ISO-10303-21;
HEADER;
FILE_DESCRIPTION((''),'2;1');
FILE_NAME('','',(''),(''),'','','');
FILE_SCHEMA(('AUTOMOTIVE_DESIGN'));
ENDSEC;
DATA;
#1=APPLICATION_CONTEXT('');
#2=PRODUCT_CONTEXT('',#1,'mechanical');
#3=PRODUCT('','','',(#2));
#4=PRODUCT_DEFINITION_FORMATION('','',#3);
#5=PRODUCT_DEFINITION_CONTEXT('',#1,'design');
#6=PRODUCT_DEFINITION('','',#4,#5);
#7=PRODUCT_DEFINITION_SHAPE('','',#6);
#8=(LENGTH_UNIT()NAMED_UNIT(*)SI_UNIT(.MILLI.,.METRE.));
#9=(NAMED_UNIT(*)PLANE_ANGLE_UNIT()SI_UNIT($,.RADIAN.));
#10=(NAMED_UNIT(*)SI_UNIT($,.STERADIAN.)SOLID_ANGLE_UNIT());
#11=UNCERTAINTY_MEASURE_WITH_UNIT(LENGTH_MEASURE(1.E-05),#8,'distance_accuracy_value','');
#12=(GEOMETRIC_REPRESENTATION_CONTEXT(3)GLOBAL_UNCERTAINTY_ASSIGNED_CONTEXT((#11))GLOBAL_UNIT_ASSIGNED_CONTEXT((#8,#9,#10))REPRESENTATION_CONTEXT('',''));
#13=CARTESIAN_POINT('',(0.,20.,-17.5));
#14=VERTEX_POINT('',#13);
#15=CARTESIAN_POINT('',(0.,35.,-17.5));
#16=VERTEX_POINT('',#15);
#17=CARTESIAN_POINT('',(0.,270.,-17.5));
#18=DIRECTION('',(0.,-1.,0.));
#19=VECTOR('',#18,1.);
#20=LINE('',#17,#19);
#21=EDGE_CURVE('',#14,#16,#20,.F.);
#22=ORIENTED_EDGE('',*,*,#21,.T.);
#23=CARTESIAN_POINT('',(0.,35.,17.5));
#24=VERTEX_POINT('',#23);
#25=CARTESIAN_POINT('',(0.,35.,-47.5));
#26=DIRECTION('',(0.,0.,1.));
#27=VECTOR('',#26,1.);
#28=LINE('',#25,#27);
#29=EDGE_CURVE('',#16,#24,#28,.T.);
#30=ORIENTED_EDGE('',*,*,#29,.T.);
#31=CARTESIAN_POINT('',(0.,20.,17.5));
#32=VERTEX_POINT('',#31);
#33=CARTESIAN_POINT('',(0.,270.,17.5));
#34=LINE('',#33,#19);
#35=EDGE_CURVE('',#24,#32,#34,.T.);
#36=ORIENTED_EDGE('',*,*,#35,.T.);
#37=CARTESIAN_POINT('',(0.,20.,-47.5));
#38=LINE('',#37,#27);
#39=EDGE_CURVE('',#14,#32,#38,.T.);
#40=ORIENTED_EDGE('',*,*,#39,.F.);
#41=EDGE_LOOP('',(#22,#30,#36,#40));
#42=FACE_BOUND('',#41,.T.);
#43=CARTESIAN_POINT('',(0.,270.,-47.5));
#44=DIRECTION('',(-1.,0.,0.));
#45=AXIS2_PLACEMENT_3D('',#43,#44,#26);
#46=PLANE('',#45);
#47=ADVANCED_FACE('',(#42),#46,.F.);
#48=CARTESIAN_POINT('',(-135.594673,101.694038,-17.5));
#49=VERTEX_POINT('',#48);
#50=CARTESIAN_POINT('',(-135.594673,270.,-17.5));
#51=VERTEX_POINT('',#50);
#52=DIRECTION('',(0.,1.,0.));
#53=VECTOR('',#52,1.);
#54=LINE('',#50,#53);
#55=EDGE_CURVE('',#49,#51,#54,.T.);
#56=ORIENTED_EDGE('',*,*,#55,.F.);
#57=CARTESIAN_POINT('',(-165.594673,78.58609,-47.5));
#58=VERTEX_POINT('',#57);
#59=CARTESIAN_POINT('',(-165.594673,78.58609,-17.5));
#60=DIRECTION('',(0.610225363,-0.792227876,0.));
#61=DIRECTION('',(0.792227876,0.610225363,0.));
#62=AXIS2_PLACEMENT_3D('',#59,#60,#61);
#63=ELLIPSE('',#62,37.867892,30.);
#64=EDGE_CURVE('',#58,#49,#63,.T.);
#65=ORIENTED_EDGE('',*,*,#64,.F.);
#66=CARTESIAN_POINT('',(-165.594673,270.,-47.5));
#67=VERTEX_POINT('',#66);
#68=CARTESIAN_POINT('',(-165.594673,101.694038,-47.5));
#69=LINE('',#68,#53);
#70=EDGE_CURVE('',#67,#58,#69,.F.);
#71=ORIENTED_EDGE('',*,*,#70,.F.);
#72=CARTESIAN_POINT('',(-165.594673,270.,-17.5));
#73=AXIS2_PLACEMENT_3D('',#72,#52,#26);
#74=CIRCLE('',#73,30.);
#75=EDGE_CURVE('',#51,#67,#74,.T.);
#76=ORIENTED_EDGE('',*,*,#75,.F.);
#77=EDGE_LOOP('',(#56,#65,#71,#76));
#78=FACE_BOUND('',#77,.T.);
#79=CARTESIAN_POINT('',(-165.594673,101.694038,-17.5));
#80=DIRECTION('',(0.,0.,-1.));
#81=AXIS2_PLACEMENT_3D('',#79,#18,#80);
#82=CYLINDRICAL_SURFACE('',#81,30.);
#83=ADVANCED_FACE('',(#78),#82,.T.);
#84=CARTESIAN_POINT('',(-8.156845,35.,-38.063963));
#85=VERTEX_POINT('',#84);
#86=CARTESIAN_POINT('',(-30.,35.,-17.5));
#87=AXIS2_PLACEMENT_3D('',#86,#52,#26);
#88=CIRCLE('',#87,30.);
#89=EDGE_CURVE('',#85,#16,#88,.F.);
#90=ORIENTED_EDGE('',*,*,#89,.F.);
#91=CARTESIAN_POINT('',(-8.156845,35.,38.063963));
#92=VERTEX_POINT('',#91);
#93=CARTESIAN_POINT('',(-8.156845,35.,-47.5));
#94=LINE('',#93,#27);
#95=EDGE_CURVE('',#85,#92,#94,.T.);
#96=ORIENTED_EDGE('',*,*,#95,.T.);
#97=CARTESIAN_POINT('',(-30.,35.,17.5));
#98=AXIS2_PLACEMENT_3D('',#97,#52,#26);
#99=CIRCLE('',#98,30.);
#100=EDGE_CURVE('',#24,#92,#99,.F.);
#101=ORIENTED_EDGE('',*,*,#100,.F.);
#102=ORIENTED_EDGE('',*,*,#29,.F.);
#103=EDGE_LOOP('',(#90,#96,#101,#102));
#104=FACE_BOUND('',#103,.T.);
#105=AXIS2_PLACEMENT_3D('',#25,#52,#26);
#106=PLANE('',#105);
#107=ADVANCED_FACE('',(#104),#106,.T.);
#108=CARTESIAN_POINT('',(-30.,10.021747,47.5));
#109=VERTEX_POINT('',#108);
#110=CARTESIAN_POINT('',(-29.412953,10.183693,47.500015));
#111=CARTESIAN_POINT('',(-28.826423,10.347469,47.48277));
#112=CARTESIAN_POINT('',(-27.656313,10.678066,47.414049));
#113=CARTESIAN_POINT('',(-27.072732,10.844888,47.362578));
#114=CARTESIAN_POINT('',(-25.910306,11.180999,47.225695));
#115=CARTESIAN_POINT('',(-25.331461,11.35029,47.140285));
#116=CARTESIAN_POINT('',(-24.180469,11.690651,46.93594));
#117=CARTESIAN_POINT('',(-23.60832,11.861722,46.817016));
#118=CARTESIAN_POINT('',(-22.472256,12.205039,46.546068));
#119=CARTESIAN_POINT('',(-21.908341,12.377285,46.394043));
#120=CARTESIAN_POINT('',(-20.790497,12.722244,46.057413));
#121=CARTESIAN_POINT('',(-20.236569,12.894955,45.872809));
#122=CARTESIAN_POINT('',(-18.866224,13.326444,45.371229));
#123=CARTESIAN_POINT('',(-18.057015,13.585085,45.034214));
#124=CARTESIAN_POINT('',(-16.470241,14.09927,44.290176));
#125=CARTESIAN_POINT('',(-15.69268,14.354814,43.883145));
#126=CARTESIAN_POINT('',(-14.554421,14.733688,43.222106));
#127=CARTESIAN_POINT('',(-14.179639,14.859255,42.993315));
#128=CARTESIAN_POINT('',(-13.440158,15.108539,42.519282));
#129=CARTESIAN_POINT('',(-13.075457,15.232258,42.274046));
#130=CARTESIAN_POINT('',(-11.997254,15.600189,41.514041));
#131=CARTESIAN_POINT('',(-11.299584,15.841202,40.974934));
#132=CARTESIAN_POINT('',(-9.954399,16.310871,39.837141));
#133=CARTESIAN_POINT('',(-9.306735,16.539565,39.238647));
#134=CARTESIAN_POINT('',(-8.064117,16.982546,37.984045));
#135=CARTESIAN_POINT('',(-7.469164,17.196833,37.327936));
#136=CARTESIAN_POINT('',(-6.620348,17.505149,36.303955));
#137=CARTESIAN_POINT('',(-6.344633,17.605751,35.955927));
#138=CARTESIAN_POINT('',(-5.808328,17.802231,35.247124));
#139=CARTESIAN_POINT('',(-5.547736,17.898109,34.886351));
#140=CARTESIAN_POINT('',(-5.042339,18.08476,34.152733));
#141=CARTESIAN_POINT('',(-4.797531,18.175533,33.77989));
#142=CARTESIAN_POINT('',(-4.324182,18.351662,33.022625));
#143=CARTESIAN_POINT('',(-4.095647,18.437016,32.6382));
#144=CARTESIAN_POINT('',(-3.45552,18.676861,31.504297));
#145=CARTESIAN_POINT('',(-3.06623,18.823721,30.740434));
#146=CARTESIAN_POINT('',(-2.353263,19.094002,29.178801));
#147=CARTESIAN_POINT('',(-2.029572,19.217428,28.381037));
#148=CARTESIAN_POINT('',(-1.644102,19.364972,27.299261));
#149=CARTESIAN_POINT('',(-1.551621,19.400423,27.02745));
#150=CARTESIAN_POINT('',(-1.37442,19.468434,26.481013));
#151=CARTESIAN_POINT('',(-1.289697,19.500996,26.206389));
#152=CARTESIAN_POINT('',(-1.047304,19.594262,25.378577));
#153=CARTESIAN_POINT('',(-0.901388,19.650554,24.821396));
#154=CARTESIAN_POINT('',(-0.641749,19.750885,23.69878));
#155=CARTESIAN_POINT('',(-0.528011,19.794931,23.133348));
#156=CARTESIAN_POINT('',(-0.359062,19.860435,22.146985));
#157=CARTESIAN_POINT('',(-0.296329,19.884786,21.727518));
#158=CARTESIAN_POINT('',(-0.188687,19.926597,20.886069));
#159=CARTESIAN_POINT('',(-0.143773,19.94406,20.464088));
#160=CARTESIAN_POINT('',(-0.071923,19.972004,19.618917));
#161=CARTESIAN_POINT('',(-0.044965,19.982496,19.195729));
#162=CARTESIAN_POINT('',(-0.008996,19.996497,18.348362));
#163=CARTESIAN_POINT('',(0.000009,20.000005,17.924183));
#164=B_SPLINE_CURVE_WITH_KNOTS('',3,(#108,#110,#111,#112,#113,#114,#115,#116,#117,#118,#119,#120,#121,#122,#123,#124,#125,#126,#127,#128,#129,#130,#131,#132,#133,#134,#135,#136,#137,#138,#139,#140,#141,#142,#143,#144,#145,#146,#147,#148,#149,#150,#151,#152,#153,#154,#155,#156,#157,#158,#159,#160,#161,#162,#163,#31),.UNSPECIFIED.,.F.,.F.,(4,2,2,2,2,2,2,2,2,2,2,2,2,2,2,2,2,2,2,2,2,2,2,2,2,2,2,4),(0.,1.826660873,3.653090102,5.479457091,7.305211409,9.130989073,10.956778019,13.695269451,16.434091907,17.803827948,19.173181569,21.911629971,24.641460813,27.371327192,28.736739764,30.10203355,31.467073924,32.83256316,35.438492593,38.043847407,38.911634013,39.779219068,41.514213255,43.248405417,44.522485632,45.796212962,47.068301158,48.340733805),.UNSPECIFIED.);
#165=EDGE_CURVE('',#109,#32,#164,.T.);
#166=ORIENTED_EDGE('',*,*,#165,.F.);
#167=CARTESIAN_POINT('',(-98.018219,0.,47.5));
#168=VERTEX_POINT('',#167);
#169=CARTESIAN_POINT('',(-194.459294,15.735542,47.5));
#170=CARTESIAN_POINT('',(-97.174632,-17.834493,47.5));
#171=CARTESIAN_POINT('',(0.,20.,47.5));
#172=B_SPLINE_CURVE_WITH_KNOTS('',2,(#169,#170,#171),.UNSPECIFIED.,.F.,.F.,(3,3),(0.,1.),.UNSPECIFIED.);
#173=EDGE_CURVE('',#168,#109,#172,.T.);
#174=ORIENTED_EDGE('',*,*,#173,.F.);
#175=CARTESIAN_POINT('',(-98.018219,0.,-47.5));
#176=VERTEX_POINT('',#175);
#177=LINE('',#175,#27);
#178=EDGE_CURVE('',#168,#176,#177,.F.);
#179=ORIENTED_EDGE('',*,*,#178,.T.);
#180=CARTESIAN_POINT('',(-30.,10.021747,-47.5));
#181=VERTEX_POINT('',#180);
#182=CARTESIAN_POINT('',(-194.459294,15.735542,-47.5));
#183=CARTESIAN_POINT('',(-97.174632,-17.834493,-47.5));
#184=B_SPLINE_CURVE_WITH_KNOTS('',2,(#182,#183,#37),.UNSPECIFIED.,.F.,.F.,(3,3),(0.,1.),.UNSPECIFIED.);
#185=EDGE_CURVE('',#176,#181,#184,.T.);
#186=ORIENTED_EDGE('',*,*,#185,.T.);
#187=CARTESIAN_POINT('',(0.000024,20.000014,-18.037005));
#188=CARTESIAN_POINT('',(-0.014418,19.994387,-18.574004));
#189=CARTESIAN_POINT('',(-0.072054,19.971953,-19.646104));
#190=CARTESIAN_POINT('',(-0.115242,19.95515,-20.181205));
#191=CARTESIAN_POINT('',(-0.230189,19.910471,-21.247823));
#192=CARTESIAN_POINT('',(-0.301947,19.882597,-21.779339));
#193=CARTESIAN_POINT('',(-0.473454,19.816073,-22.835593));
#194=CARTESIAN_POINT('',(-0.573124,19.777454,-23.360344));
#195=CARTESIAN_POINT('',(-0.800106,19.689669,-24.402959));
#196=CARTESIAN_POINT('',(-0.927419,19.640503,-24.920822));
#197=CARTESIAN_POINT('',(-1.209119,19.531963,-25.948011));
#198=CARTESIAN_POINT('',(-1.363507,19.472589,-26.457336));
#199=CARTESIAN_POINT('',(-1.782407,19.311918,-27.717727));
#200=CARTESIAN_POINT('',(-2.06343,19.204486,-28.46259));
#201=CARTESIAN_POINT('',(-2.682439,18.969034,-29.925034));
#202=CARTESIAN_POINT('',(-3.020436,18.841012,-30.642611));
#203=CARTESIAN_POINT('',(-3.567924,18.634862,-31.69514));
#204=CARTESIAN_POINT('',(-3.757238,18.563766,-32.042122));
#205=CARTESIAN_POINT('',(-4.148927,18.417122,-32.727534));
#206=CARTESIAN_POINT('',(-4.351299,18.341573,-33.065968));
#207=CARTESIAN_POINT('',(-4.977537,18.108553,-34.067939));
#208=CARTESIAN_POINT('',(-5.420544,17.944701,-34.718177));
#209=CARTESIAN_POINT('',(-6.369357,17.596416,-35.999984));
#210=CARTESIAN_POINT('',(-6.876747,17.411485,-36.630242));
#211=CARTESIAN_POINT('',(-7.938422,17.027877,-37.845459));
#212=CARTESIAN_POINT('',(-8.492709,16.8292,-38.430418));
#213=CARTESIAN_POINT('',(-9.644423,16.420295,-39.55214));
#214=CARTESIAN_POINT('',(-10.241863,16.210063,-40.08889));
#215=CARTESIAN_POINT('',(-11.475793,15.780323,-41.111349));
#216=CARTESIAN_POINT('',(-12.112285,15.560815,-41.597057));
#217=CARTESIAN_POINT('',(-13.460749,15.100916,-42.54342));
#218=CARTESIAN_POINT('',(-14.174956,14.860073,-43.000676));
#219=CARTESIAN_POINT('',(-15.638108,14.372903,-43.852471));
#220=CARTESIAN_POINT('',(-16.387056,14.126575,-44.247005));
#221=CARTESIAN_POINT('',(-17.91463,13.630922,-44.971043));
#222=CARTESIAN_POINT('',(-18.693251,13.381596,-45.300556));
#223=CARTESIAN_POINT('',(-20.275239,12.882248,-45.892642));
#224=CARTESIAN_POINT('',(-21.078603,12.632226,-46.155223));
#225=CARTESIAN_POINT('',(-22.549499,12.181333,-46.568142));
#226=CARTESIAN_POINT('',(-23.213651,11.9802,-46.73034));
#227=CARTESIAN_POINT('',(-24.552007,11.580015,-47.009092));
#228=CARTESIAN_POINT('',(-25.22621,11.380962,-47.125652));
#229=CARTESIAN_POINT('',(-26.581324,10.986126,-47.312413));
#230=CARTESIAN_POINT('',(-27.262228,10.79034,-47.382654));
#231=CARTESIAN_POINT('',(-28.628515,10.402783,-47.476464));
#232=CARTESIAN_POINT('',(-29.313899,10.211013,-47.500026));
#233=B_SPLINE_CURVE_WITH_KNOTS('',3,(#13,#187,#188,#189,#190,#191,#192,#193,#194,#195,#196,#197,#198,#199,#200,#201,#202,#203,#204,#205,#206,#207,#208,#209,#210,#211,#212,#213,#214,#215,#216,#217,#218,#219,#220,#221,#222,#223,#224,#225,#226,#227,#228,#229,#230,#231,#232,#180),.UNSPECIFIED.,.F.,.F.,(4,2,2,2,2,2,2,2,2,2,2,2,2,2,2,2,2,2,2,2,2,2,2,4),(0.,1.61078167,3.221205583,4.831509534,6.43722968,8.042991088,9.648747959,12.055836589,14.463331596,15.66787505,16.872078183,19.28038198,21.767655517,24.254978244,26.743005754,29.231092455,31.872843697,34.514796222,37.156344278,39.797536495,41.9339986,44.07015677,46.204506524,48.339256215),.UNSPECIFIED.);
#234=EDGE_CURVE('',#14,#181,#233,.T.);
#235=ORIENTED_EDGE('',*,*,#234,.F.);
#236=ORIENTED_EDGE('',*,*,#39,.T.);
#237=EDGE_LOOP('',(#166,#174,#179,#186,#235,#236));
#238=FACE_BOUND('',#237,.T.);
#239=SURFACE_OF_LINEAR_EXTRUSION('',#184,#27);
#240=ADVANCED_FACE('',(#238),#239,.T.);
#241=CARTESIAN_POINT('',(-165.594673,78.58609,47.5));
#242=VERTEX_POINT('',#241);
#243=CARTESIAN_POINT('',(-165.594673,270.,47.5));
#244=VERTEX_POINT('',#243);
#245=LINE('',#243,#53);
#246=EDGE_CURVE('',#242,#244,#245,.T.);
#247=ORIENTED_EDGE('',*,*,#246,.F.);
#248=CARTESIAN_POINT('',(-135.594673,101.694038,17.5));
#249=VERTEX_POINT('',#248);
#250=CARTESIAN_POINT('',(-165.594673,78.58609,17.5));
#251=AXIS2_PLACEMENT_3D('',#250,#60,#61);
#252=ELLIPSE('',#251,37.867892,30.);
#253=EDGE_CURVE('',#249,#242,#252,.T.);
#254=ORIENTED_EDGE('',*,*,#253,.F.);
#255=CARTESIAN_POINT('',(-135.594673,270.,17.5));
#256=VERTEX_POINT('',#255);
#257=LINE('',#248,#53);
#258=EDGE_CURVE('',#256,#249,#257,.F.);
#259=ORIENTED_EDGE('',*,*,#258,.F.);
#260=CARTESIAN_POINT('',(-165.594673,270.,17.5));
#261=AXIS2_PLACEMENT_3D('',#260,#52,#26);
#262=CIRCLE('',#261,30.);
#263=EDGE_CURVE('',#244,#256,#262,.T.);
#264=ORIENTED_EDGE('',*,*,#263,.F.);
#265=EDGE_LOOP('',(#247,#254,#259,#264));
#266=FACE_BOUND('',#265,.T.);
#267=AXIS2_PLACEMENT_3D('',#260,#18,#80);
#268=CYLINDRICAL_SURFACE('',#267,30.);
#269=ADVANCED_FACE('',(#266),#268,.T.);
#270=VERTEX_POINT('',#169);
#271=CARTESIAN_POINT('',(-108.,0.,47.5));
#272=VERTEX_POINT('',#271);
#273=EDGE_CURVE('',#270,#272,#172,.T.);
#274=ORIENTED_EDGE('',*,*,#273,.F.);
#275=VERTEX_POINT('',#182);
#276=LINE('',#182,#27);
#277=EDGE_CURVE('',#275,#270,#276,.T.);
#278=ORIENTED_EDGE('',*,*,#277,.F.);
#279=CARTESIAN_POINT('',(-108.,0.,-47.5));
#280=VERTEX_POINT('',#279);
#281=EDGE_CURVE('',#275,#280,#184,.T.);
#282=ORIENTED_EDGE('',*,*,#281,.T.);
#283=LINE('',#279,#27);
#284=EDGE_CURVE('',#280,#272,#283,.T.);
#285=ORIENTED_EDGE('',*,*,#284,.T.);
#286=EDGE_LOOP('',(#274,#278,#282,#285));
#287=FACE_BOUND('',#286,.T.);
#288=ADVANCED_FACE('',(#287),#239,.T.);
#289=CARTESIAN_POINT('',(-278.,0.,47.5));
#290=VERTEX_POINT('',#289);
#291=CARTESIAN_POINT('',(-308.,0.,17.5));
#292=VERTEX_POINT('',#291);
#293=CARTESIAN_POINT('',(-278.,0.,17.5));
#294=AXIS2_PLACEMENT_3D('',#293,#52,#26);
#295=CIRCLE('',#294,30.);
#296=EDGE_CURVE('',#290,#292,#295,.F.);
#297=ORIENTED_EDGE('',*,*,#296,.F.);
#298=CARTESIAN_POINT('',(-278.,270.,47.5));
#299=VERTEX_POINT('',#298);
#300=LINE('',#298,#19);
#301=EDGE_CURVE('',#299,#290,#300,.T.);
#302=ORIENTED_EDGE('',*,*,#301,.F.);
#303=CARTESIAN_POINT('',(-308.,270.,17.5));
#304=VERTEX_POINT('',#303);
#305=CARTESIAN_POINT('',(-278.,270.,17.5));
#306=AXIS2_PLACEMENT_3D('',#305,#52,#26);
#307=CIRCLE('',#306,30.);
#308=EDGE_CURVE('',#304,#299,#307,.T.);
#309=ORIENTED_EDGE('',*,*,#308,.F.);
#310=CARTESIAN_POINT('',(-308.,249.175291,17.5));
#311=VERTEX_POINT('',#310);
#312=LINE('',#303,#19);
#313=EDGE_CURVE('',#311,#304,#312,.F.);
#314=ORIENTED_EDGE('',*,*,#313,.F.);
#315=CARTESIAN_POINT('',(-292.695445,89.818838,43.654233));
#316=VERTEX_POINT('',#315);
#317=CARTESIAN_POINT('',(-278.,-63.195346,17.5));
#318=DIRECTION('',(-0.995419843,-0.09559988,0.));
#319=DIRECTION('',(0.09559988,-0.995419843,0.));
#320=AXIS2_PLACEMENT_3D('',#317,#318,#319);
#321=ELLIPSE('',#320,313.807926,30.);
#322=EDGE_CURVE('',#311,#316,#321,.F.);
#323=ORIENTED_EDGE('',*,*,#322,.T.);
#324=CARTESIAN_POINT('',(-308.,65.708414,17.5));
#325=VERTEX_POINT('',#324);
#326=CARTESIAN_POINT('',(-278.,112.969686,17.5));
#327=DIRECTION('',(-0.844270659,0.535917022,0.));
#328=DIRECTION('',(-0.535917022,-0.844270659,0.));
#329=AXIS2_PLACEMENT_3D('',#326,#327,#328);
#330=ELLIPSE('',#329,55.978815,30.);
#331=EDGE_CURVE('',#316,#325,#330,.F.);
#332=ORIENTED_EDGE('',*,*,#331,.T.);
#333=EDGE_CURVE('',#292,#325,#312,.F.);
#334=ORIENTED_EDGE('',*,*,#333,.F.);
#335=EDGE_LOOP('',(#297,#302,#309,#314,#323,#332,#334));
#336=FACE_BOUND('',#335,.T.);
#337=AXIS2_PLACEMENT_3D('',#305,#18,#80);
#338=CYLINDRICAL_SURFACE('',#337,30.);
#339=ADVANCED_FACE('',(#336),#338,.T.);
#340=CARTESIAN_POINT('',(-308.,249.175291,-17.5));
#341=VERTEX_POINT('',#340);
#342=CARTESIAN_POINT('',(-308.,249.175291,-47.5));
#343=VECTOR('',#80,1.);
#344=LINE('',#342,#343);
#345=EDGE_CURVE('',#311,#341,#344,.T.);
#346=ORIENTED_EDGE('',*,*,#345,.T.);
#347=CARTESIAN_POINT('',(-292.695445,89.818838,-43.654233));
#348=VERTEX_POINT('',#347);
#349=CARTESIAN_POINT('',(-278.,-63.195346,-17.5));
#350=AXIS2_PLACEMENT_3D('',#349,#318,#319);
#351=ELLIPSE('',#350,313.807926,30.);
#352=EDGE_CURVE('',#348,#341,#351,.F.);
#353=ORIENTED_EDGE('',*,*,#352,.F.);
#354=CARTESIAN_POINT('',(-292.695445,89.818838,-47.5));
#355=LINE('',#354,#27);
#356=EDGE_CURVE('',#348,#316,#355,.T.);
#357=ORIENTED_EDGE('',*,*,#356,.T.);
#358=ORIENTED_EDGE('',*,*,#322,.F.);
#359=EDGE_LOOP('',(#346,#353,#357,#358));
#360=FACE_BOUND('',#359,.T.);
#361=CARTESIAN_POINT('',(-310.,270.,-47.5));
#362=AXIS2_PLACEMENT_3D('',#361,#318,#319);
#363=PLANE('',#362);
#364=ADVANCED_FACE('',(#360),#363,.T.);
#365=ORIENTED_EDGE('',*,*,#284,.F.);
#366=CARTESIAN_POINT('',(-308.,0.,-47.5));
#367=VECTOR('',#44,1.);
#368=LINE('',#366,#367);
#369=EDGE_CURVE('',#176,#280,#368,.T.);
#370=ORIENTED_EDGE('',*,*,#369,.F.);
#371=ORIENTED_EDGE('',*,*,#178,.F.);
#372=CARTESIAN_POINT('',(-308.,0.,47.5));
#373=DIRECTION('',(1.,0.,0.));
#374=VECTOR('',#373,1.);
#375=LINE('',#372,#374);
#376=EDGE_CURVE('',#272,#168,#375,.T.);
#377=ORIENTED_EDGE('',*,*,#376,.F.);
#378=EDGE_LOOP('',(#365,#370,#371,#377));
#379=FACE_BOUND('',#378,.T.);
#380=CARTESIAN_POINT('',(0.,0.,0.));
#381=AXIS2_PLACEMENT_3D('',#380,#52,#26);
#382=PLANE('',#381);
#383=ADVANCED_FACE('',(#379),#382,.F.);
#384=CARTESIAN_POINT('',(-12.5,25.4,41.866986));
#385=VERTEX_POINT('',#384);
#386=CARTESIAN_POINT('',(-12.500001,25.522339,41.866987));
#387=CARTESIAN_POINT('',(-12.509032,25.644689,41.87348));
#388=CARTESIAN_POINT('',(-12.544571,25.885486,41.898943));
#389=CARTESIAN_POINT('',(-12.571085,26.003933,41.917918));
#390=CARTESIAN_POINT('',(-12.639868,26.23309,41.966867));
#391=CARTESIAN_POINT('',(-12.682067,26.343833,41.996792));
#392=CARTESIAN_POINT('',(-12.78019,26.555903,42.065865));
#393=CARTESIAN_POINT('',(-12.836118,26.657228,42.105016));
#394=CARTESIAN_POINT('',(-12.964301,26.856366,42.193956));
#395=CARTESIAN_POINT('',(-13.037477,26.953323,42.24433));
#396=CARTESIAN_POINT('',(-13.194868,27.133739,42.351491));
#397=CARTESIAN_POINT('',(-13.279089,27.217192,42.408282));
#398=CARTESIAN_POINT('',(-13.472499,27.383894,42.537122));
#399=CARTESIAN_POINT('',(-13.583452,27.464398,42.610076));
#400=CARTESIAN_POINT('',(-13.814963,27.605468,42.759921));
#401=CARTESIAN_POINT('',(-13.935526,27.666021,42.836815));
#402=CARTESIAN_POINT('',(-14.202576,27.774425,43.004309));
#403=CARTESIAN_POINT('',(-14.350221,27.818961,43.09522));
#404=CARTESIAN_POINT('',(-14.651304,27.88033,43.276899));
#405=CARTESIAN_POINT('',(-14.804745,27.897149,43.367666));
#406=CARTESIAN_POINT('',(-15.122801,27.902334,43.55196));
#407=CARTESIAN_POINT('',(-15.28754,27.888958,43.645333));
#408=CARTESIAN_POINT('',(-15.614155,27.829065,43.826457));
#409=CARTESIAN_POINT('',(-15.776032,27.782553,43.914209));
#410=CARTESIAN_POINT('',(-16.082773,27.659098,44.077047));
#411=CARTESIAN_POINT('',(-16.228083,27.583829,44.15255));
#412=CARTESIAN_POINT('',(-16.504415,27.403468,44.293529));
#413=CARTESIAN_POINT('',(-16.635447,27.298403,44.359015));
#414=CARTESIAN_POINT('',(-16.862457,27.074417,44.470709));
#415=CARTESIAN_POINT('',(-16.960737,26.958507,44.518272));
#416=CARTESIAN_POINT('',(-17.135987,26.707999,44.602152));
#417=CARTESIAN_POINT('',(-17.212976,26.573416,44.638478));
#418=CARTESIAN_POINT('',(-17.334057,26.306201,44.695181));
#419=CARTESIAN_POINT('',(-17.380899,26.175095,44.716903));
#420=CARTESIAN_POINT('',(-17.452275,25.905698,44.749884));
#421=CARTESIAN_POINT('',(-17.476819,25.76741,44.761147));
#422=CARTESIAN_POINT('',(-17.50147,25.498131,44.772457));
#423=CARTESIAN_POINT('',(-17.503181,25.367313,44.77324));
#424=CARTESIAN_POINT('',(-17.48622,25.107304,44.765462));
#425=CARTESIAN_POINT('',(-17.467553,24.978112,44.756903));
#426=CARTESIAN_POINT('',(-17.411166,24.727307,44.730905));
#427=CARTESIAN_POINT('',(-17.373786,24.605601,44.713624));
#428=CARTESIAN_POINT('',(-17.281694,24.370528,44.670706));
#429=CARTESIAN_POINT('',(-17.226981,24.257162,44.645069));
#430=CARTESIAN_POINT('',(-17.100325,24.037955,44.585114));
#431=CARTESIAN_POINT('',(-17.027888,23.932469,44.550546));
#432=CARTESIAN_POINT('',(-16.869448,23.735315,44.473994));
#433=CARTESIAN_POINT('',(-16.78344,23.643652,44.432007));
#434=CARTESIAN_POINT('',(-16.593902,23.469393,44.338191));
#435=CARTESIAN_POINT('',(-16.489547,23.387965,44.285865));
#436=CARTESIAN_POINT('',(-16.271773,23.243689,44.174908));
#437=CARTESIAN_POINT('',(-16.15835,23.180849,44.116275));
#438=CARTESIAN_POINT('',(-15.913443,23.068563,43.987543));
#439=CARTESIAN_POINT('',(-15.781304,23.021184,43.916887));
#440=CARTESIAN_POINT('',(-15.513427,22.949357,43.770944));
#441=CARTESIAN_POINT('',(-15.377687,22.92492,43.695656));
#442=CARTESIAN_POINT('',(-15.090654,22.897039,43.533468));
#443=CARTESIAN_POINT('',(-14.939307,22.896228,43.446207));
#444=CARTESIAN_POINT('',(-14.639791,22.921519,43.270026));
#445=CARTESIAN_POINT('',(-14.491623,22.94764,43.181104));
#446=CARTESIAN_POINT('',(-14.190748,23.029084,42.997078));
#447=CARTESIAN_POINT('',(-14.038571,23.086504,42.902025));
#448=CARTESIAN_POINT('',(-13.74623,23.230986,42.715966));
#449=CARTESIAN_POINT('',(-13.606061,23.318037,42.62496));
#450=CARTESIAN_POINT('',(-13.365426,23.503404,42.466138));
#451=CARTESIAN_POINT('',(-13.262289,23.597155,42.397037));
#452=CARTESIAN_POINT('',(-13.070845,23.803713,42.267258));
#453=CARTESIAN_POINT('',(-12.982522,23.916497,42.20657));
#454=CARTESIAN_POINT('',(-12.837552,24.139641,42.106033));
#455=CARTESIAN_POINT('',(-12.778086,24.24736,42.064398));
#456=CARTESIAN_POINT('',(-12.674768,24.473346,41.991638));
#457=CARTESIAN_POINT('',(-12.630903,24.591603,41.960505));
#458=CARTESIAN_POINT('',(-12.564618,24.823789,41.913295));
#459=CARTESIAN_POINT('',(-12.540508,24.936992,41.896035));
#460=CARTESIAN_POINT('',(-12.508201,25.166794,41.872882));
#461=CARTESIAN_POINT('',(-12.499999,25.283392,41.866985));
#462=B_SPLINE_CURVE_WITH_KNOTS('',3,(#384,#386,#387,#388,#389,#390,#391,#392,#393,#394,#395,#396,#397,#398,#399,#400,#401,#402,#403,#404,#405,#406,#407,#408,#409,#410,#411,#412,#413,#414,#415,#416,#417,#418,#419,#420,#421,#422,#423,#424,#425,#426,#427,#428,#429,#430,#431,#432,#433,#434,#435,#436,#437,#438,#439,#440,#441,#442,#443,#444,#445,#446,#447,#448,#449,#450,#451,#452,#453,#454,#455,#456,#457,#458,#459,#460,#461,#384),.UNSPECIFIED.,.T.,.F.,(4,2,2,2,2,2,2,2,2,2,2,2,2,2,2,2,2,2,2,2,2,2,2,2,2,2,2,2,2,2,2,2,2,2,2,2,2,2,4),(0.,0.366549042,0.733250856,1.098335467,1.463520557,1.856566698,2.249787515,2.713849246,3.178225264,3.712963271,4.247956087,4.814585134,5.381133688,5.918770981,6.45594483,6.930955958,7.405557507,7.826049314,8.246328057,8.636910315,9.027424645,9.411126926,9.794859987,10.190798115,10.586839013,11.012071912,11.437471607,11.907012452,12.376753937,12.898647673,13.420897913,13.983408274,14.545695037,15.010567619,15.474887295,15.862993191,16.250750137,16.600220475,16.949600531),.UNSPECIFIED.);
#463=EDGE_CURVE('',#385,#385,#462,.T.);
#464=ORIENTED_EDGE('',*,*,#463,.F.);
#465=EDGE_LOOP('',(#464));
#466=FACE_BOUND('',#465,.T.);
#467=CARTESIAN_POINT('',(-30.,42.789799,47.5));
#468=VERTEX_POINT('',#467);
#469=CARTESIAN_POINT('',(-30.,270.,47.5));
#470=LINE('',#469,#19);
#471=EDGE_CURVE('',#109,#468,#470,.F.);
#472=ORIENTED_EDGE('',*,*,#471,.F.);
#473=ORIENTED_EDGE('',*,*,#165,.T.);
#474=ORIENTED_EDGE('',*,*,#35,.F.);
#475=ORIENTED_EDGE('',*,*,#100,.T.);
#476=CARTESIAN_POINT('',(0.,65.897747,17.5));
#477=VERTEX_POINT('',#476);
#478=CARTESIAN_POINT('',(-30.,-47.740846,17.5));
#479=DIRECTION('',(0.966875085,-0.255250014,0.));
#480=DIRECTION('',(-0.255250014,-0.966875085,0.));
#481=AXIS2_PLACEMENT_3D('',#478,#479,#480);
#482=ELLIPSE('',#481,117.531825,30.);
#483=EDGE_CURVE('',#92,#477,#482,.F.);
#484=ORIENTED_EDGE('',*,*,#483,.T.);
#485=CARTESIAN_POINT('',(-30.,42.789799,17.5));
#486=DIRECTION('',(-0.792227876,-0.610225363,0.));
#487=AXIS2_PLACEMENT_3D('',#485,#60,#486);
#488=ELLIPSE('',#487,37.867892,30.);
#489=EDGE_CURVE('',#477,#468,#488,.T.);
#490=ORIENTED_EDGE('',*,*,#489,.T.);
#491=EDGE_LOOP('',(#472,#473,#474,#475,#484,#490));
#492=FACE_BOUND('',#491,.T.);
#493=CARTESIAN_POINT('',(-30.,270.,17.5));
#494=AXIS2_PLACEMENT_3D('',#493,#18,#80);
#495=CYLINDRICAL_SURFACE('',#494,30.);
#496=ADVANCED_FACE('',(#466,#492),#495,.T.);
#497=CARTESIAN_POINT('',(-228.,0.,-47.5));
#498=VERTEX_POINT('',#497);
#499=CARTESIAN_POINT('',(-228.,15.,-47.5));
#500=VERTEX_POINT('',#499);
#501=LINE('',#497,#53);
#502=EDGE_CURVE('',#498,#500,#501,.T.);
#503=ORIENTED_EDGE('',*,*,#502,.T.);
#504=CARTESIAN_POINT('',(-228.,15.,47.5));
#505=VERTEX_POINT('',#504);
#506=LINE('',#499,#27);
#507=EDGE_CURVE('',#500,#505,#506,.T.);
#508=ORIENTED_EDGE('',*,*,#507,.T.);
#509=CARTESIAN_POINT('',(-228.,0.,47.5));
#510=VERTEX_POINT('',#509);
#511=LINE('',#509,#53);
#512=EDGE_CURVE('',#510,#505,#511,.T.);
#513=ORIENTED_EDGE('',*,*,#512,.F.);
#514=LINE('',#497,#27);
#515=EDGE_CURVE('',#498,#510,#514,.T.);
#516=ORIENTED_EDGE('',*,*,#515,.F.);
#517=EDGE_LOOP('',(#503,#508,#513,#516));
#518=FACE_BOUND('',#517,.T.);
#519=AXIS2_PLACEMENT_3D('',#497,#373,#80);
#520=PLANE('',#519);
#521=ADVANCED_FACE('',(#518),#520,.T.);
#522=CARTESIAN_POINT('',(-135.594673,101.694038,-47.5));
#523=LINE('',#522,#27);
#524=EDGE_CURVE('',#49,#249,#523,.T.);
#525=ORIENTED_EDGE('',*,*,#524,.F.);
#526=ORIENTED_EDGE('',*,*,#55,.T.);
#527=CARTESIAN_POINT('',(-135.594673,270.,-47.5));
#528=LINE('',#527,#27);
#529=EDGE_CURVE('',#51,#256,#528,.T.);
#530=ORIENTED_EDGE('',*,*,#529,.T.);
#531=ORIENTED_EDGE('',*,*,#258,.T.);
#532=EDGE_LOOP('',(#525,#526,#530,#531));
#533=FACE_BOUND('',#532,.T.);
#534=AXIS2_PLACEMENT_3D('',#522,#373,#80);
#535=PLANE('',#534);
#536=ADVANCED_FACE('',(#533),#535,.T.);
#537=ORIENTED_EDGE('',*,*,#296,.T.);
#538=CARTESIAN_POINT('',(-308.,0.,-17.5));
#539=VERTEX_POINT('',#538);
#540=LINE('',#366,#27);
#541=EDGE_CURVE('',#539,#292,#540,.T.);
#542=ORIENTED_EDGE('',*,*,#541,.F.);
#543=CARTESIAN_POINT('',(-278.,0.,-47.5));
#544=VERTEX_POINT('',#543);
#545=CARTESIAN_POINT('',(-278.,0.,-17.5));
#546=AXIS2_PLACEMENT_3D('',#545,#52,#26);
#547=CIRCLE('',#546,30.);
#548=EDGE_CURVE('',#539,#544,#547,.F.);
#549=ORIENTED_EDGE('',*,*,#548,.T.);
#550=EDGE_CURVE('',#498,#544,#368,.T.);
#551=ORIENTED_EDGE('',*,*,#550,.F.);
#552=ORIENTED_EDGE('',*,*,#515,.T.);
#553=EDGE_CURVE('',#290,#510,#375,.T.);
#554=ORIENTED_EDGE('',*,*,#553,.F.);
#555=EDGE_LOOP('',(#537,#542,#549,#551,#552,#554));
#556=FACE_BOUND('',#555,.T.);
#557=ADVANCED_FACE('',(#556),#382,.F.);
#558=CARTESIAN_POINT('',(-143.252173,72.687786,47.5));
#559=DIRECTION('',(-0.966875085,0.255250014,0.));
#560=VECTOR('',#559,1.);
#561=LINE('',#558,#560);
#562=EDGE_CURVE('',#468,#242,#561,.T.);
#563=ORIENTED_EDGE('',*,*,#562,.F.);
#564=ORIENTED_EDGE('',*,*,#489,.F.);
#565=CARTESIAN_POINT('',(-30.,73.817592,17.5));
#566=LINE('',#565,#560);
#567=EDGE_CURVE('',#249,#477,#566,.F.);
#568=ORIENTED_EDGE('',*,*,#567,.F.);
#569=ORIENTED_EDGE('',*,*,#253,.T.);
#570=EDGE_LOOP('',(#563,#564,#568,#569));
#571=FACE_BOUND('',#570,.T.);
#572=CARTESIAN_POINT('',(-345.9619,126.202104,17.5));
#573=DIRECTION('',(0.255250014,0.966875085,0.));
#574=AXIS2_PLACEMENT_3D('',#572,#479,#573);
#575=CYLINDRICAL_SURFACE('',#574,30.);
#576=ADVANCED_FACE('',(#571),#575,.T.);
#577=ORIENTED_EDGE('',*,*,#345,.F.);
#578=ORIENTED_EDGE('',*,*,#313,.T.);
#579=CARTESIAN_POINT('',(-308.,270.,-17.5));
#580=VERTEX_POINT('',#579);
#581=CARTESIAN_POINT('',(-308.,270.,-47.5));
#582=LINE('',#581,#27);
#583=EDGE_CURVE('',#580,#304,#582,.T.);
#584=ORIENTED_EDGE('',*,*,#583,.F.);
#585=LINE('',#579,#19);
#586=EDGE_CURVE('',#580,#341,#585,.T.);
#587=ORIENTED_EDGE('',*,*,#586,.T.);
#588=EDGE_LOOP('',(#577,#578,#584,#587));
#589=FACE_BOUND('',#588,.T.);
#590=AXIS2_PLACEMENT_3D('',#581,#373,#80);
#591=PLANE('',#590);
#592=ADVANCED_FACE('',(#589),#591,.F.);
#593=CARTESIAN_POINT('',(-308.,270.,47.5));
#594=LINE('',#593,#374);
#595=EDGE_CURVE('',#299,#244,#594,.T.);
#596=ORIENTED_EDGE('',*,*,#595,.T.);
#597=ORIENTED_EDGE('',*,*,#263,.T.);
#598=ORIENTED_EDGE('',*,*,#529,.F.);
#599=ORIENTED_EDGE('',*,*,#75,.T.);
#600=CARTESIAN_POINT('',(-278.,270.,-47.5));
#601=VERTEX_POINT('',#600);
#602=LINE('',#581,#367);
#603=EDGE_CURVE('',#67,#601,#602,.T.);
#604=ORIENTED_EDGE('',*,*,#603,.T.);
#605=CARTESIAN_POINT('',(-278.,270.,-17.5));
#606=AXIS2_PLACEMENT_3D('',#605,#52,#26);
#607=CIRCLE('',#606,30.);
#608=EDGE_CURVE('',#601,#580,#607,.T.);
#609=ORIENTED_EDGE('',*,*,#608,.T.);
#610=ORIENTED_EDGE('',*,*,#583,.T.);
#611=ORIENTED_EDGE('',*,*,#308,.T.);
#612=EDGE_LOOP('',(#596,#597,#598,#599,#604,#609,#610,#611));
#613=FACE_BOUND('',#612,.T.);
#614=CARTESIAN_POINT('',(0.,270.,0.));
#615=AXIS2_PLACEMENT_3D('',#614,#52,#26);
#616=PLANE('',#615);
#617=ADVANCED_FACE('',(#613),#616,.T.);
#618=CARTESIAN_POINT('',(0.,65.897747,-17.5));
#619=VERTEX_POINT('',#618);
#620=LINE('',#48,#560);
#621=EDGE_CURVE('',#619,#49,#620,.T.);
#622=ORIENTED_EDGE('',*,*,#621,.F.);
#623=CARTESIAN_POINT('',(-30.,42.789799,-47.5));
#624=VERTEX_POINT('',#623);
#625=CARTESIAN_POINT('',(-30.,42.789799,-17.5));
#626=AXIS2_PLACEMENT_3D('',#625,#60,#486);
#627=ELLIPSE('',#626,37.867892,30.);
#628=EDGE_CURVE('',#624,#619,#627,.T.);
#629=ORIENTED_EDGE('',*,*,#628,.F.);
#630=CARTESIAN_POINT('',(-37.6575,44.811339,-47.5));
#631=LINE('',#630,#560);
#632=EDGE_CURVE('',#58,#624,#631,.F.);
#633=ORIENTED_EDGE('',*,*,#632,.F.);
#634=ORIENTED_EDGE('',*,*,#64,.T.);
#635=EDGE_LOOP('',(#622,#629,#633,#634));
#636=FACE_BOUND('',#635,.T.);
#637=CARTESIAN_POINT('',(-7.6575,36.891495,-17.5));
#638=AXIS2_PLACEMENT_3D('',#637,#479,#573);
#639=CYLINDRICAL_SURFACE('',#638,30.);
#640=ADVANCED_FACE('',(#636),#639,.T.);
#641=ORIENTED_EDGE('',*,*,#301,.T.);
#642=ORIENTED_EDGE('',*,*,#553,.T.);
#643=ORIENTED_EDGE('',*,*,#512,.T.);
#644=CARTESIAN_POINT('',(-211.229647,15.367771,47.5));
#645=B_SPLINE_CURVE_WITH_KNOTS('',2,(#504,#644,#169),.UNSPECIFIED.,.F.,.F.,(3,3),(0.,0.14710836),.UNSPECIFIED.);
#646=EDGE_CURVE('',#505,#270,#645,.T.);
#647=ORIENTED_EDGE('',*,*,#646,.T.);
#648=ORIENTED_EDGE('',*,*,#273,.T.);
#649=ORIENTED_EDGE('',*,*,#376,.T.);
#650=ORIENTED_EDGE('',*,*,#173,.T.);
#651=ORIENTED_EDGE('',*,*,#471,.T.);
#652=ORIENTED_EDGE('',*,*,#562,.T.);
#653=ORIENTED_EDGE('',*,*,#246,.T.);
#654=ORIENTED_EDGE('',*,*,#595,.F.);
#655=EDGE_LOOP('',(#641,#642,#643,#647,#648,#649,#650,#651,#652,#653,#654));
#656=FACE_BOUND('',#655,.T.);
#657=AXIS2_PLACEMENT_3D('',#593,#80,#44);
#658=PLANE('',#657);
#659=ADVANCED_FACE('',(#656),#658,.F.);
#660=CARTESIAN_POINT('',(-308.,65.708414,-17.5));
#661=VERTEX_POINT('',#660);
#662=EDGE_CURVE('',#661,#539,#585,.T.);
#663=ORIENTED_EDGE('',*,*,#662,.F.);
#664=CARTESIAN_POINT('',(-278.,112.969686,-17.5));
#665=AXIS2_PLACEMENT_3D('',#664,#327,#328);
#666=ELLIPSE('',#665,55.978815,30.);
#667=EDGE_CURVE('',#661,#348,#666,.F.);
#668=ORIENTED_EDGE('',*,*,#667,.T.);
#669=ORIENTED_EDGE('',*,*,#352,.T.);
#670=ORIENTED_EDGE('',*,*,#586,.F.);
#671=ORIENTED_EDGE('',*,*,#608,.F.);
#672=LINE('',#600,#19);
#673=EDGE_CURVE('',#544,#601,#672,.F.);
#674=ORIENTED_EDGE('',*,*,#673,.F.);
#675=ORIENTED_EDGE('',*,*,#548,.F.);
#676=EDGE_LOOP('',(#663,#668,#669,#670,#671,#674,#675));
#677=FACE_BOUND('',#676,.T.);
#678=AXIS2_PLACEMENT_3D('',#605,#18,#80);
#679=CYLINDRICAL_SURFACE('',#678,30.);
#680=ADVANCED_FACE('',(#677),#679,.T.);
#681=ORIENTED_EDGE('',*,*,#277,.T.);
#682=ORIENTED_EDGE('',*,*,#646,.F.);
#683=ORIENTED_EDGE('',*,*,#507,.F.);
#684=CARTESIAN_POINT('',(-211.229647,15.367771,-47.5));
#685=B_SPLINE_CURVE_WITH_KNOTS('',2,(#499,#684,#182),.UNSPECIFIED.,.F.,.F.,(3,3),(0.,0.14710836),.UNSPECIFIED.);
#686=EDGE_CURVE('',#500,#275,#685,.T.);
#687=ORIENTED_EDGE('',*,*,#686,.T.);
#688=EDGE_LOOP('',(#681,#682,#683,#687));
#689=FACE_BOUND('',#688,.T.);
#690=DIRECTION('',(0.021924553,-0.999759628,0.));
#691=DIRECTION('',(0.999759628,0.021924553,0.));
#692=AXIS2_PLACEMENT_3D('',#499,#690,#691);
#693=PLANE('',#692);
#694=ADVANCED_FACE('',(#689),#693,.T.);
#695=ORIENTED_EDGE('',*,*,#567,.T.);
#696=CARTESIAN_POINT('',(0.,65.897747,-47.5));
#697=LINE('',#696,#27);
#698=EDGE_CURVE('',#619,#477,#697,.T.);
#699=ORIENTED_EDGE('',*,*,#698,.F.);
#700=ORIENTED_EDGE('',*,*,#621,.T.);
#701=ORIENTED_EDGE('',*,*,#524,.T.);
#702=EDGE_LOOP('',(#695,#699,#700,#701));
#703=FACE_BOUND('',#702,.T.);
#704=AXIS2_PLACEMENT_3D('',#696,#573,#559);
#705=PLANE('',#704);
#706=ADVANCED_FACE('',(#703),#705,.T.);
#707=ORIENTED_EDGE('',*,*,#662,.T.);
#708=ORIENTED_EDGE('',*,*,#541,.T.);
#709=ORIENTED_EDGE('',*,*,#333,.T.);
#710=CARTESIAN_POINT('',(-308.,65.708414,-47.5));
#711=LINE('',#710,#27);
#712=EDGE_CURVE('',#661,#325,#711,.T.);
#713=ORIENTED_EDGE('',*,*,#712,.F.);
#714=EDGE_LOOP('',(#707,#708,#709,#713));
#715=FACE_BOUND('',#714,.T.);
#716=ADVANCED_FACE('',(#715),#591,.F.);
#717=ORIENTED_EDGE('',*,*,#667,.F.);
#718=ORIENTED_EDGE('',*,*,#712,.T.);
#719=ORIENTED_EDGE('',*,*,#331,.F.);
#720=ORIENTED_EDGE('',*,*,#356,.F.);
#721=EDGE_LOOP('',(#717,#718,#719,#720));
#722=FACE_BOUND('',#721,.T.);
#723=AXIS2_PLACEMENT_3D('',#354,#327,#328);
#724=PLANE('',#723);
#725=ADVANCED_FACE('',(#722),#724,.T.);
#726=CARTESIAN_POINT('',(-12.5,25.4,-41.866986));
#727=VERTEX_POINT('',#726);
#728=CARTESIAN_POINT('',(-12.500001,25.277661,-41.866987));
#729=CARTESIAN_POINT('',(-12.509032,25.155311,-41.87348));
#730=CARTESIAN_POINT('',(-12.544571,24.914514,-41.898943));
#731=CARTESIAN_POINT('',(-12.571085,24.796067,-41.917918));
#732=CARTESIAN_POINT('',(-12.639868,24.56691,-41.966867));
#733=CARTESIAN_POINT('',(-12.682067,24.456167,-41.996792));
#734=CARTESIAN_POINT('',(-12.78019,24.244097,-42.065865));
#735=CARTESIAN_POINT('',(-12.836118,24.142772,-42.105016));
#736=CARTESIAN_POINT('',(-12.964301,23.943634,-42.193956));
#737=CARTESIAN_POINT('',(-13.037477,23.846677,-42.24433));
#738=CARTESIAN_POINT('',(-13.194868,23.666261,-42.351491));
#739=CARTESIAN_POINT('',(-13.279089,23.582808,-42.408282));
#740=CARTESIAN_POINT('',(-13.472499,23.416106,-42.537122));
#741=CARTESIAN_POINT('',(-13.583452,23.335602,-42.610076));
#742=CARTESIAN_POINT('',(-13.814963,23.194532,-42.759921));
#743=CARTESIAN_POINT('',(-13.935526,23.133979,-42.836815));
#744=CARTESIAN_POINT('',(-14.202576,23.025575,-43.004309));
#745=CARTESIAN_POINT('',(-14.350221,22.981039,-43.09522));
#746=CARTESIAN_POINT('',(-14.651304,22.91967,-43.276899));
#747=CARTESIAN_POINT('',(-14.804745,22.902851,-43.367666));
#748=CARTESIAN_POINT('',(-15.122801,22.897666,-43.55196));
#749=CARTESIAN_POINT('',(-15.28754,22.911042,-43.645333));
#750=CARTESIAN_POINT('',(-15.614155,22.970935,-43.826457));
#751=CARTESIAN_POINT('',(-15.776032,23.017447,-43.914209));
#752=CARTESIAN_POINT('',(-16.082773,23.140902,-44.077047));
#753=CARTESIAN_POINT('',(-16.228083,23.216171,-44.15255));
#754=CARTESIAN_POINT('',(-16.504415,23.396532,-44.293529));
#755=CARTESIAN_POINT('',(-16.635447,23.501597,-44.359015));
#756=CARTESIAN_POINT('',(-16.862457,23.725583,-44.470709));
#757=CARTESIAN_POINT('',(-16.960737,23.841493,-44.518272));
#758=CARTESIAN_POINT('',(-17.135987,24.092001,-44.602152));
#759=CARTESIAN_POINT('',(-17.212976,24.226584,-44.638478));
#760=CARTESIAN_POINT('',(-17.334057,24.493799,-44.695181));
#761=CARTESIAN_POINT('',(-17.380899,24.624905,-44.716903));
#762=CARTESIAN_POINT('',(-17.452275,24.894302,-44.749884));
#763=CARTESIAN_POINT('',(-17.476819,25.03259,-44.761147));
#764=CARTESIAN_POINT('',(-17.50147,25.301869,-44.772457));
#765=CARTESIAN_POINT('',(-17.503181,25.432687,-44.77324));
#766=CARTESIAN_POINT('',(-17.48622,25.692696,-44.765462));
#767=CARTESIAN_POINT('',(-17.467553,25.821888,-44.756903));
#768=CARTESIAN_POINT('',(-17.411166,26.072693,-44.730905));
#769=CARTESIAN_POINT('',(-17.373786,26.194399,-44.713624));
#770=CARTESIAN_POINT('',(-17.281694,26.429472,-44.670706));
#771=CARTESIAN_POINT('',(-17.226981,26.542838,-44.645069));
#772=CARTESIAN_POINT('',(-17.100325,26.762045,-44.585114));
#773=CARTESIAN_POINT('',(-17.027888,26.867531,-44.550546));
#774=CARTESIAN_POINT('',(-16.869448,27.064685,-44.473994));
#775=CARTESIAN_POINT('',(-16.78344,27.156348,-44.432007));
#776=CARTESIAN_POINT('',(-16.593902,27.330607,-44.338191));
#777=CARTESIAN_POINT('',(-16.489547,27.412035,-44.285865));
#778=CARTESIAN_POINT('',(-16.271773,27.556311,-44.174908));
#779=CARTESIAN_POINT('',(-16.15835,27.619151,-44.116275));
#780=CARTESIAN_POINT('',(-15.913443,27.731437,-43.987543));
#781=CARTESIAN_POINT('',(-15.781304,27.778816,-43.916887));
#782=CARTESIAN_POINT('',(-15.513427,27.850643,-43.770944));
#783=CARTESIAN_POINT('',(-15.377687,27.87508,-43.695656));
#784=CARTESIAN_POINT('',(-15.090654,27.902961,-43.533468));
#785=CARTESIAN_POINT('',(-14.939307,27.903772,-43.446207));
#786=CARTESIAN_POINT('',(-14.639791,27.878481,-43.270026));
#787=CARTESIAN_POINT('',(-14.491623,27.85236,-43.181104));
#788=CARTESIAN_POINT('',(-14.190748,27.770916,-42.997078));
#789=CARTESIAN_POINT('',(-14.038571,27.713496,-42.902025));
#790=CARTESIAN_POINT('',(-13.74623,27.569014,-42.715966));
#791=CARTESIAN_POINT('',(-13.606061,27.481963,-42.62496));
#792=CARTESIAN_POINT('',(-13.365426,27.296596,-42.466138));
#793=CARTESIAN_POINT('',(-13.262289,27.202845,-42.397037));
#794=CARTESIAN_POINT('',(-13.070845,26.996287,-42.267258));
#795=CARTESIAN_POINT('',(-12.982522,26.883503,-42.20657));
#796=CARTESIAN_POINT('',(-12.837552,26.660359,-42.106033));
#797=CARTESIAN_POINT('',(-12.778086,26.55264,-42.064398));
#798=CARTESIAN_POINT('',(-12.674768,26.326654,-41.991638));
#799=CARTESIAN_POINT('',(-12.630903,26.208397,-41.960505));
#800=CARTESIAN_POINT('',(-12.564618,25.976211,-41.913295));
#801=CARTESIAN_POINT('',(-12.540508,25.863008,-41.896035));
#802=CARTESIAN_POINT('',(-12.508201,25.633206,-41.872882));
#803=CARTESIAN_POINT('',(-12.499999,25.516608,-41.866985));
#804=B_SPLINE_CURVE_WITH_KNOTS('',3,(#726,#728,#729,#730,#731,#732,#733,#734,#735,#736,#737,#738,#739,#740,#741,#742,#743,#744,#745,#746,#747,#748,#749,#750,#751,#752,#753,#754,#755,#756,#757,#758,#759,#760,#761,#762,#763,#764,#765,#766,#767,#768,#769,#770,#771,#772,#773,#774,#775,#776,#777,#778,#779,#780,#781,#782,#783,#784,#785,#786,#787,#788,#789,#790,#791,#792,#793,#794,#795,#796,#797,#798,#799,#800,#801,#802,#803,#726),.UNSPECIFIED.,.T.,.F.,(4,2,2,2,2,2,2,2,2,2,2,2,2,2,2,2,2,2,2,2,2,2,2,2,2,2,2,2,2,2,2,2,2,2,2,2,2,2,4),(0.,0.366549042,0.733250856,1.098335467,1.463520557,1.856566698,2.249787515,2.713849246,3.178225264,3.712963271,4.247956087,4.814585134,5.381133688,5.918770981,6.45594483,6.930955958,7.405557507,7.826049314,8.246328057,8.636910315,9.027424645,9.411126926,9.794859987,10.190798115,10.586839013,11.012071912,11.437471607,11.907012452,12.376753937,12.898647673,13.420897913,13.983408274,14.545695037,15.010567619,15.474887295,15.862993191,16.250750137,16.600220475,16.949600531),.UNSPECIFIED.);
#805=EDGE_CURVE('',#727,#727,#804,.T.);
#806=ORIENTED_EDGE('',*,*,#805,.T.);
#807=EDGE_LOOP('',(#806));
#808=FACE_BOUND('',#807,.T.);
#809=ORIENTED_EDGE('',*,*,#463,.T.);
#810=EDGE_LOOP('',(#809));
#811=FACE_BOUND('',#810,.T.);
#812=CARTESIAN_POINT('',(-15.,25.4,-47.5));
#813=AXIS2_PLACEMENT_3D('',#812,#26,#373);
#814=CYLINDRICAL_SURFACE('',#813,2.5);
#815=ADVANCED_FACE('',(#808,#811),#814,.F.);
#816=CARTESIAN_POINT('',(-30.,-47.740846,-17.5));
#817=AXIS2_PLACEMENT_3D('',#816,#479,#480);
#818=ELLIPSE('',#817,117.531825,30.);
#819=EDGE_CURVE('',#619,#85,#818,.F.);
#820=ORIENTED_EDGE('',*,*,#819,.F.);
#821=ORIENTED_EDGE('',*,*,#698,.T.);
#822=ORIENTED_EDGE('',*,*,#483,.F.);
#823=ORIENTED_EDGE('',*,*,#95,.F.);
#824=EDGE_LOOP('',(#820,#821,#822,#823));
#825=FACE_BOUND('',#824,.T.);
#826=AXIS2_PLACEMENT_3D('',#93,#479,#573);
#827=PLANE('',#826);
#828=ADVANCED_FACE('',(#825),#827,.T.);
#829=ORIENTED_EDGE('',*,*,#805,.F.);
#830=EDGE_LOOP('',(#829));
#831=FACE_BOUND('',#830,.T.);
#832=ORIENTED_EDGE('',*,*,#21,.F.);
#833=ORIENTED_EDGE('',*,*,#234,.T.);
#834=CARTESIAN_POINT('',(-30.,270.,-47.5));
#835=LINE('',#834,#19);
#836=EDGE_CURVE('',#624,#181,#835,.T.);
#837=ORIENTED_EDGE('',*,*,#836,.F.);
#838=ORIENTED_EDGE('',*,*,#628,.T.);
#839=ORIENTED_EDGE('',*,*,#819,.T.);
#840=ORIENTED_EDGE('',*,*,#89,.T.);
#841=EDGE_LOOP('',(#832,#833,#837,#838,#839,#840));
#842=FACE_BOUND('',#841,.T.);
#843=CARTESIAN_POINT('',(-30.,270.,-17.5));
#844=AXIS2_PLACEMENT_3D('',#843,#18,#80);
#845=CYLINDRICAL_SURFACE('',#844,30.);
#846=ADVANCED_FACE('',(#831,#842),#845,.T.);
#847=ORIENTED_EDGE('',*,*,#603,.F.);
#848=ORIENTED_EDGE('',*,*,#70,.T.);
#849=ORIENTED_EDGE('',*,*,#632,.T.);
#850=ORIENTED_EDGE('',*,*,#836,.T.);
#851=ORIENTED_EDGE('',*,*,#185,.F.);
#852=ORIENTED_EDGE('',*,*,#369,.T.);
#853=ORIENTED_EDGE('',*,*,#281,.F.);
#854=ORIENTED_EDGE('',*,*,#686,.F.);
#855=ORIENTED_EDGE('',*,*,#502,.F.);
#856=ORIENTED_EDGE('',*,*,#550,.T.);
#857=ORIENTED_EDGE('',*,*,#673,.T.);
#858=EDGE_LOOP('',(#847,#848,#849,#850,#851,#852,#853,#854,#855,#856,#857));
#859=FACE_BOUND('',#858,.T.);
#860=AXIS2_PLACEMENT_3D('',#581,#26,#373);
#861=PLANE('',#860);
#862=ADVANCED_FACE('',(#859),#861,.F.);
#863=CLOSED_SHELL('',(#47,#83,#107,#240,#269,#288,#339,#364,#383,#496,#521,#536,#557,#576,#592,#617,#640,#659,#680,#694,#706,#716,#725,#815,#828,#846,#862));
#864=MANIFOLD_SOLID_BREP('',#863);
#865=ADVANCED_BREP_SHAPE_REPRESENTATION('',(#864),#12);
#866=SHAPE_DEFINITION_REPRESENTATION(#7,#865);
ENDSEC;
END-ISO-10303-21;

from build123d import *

# Parameters (mm, degrees)
SKETCH1_W               = 308
SKETCH1_H               = 95
BOSS_EXTRUDE1_DEPTH     = 270
FILLET1_R               = 30
SKETCH2_OUTSIDE_W       = 394.092
SKETCH2_OUTSIDE_H       = 356.092
CUT_EXTRUDE1_DEPTH      = 421.462840213
FILLET2_R               = 30
CUT_EXTRUDE2_DEPTH      = 413.33511864
CUT_EXTRUDE2_DEPTH_BACK = 413.33511864
SKETCH3_R               = 2.5


with BuildPart() as part:
    # Sketch1 → Boss-Extrude1 (new body)
    with BuildSketch(Plane(origin=(0, 0, 0), x_dir=(1, 0, 0), z_dir=(0, 1, 0))):
        with Locations((-154, 0)):
            Rectangle(SKETCH1_W, SKETCH1_H)
    extrude(amount=BOSS_EXTRUDE1_DEPTH)

    # Fillet1
    fillet1_edges = [part.edges().sort_by_distance(p)[0] for p in [
        (-308, 135, -47.5),
        (0, 135, -47.5),
        (0, 135, 47.5),
        (-308, 135, 47.5),
    ]]
    fillet(fillet1_edges, radius=FILLET1_R)

    # Sketch2 outside → Cut-Extrude1 (cut, through all)
    with BuildSketch(Plane.XY.offset(47.5)):
        with Locations((-154, 135)):
            Rectangle(SKETCH2_OUTSIDE_W, SKETCH2_OUTSIDE_H)
        with BuildLine():
            Line((-228, 0), (-228, 15))
            add(Edge.make_bspline(
                [(-228, 15), (-211.229646979, 15.3677709), (-194.459293959, 15.735541799)],
                knots=[0, 0, 0, 0.14710836, 0.14710836, 0.14710836], degree=2))
            add(Edge.make_bspline(
                [(-194.459293959, 15.735541799), (-97.174631898, -17.834493168), (0, 20)],
                knots=[0, 0, 0, 1, 1, 1], degree=2))
            Line((0, 20), (0, 35))
            Line((0, 35), (-8.156845185, 35))
            Line((-8.156845185, 35), (0, 65.897747125))
            Line((0, 65.897747125), (-135.594672757, 101.694038328))
            Line((-135.594672757, 101.694038328), (-135.594672757, 270))
            Line((-135.594672757, 270), (-310, 270))
            Line((-310, 270), (-292.695445045, 89.818838494))
            Line((-292.695445045, 89.818838494), (-308, 65.708414359))
            Line((-308, 65.708414359), (-308, 0))
            Line((-308, 0), (-228, 0))
        make_face(mode=Mode.SUBTRACT)
    extrude(amount=-CUT_EXTRUDE1_DEPTH, mode=Mode.SUBTRACT)

    # Fillet2
    # the kernel refuses this fillet: 30 mm, written as the material it takes off along each edge
    with BuildSketch(Plane(origin=(-208.110304148, 120.83778937, -47.5), x_dir=(-0.2552500139062178, -0.9668750852105331, 0), z_dir=(0.9668750852105331, -0.2552500139062178, 0))) as fillet2_piece_1_section:
        with BuildLine():
            CenterArc((FILLET2_R, -FILLET2_R), FILLET2_R, 90, 90)
            Line((0, -FILLET2_R), (0, 0))
            Line((0, 0), (FILLET2_R, 0))
        make_face()
    fillet2_piece_1 = extrude(amount=259.212321604, mode=Mode.PRIVATE)
    fillet2_piece_1 = split(fillet2_piece_1, bisect_by=Plane(origin=(-135.594672757, 71.448800887, -40.672385081), z_dir=(1, 0, 0)), keep=Keep.TOP, mode=Mode.PRIVATE)
    add(fillet2_piece_1, mode=Mode.SUBTRACT)
    with BuildSketch(Plane(origin=(42.515631391, 54.673840676, 47.5), x_dir=(0, 0, -1), z_dir=(-0.9668750852105331, 0.2552500139062178, 0))) as fillet2_piece_2_section:
        with BuildLine():
            CenterArc((FILLET2_R, FILLET2_R), FILLET2_R, 180, 90)
            Line((0, FILLET2_R), (0, 0))
            Line((0, 0), (FILLET2_R, 0))
        make_face()
    fillet2_piece_2 = extrude(amount=259.212321604, mode=Mode.PRIVATE)
    fillet2_piece_2 = split(fillet2_piece_2, bisect_by=Plane(origin=(-135.594672757, 71.448800887, 40.672385081), z_dir=(1, 0, 0)), keep=Keep.TOP, mode=Mode.PRIVATE)
    add(fillet2_piece_2, mode=Mode.SUBTRACT)
    with BuildSketch(Plane(origin=(-135.594672757, 345, -47.5), x_dir=(-1, 0, 0), z_dir=(0, -1, 0))) as fillet2_piece_3_section:
        with BuildLine():
            CenterArc((FILLET2_R, -FILLET2_R), FILLET2_R, 90, 90)
            Line((0, -FILLET2_R), (0, 0))
            Line((0, 0), (FILLET2_R, 0))
        make_face()
    fillet2_piece_3 = extrude(amount=318.305961672, mode=Mode.PRIVATE)
    fillet2_piece_3 = split(fillet2_piece_3, bisect_by=Plane(origin=(-172.144372256, 111.342969661, -40.68113524), z_dir=(0.2552500139062178, 0.9668750852105331, 0)), keep=Keep.TOP, mode=Mode.PRIVATE)
    add(fillet2_piece_3, mode=Mode.SUBTRACT)
    with BuildSketch(Plane(origin=(-135.594672757, 26.694038328, 47.5), x_dir=(0, 0, -1), z_dir=(0, 1, 0))) as fillet2_piece_4_section:
        with BuildLine():
            CenterArc((FILLET2_R, FILLET2_R), FILLET2_R, 180, 90)
            Line((0, FILLET2_R), (0, 0))
            Line((0, 0), (FILLET2_R, 0))
        make_face()
    fillet2_piece_4 = extrude(amount=318.305961672, mode=Mode.PRIVATE)
    fillet2_piece_4 = split(fillet2_piece_4, bisect_by=Plane(origin=(-172.144372256, 111.342969661, 40.68113524), z_dir=(0.2552500139062178, 0.9668750852105331, 0)), keep=Keep.TOP, mode=Mode.PRIVATE)
    add(fillet2_piece_4, mode=Mode.SUBTRACT)
    with BuildSketch(Plane(origin=(-208.110304148, 120.83778937, -47.5), x_dir=(-0.2552500139062178, -0.9668750852105331, 0), z_dir=(0.9668750852105331, -0.2552500139062178, 0))) as fillet2_piece_5a_section:
        with BuildLine():
            CenterArc((FILLET2_R, -FILLET2_R), FILLET2_R, 90, 90)
            Line((0, -FILLET2_R), (0, 0))
            Line((0, 0), (FILLET2_R, 0))
        make_face()
    fillet2_piece_5a = extrude(amount=259.212321604, mode=Mode.PRIVATE)
    fillet2_piece_5a = split(fillet2_piece_5a, bisect_by=Plane(origin=(-135.594672757, 104.326327601, -40.79309683), z_dir=(-1, 0, 0)), keep=Keep.TOP, mode=Mode.PRIVATE)
    with BuildSketch(Plane(origin=(-135.594672757, 345, -47.5), x_dir=(-1, 0, 0), z_dir=(0, -1, 0))) as fillet2_piece_5b_section:
        with BuildLine():
            CenterArc((FILLET2_R, -FILLET2_R), FILLET2_R, 90, 90)
            Line((0, -FILLET2_R), (0, 0))
            Line((0, 0), (FILLET2_R, 0))
        make_face()
    fillet2_piece_5b = extrude(amount=318.305961672, mode=Mode.PRIVATE)
    fillet2_piece_5b = split(fillet2_piece_5b, bisect_by=Plane(origin=(-133.049577842, 101.022146454, -40.79309683), z_dir=(-0.2552500139062178, -0.9668750852105331, 0)), keep=Keep.TOP, mode=Mode.PRIVATE)
    fillet2_piece_5 = fillet2_piece_5a & fillet2_piece_5b
    add(fillet2_piece_5, mode=Mode.SUBTRACT)
    with BuildSketch(Plane(origin=(42.515631391, 54.673840676, 47.5), x_dir=(0, 0, -1), z_dir=(-0.9668750852105331, 0.2552500139062178, 0))) as fillet2_piece_6a_section:
        with BuildLine():
            CenterArc((FILLET2_R, FILLET2_R), FILLET2_R, 180, 90)
            Line((0, FILLET2_R), (0, 0))
            Line((0, 0), (FILLET2_R, 0))
        make_face()
    fillet2_piece_6a = extrude(amount=259.212321604, mode=Mode.PRIVATE)
    fillet2_piece_6a = split(fillet2_piece_6a, bisect_by=Plane(origin=(-135.594672757, 104.326327601, 40.79309683), z_dir=(-1, 0, 0)), keep=Keep.TOP, mode=Mode.PRIVATE)
    with BuildSketch(Plane(origin=(-135.594672757, 26.694038328, 47.5), x_dir=(0, 0, -1), z_dir=(0, 1, 0))) as fillet2_piece_6b_section:
        with BuildLine():
            CenterArc((FILLET2_R, FILLET2_R), FILLET2_R, 180, 90)
            Line((0, FILLET2_R), (0, 0))
            Line((0, 0), (FILLET2_R, 0))
        make_face()
    fillet2_piece_6b = extrude(amount=318.305961672, mode=Mode.PRIVATE)
    fillet2_piece_6b = split(fillet2_piece_6b, bisect_by=Plane(origin=(-133.049577842, 101.022146454, 40.79309683), z_dir=(-0.2552500139062178, -0.9668750852105331, 0)), keep=Keep.TOP, mode=Mode.PRIVATE)
    fillet2_piece_6 = fillet2_piece_6a & fillet2_piece_6b
    add(fillet2_piece_6, mode=Mode.SUBTRACT)

    # Sketch3 → Cut-Extrude2 (cut, two sides: drawn at the far end of the back side and taken through both)
    with BuildSketch(Plane.XY.offset(-CUT_EXTRUDE2_DEPTH_BACK)):
        with Locations((-15, 25.4)):
            Circle(SKETCH3_R)
    extrude(amount=CUT_EXTRUDE2_DEPTH + CUT_EXTRUDE2_DEPTH_BACK, mode=Mode.SUBTRACT)


solid = part.part
